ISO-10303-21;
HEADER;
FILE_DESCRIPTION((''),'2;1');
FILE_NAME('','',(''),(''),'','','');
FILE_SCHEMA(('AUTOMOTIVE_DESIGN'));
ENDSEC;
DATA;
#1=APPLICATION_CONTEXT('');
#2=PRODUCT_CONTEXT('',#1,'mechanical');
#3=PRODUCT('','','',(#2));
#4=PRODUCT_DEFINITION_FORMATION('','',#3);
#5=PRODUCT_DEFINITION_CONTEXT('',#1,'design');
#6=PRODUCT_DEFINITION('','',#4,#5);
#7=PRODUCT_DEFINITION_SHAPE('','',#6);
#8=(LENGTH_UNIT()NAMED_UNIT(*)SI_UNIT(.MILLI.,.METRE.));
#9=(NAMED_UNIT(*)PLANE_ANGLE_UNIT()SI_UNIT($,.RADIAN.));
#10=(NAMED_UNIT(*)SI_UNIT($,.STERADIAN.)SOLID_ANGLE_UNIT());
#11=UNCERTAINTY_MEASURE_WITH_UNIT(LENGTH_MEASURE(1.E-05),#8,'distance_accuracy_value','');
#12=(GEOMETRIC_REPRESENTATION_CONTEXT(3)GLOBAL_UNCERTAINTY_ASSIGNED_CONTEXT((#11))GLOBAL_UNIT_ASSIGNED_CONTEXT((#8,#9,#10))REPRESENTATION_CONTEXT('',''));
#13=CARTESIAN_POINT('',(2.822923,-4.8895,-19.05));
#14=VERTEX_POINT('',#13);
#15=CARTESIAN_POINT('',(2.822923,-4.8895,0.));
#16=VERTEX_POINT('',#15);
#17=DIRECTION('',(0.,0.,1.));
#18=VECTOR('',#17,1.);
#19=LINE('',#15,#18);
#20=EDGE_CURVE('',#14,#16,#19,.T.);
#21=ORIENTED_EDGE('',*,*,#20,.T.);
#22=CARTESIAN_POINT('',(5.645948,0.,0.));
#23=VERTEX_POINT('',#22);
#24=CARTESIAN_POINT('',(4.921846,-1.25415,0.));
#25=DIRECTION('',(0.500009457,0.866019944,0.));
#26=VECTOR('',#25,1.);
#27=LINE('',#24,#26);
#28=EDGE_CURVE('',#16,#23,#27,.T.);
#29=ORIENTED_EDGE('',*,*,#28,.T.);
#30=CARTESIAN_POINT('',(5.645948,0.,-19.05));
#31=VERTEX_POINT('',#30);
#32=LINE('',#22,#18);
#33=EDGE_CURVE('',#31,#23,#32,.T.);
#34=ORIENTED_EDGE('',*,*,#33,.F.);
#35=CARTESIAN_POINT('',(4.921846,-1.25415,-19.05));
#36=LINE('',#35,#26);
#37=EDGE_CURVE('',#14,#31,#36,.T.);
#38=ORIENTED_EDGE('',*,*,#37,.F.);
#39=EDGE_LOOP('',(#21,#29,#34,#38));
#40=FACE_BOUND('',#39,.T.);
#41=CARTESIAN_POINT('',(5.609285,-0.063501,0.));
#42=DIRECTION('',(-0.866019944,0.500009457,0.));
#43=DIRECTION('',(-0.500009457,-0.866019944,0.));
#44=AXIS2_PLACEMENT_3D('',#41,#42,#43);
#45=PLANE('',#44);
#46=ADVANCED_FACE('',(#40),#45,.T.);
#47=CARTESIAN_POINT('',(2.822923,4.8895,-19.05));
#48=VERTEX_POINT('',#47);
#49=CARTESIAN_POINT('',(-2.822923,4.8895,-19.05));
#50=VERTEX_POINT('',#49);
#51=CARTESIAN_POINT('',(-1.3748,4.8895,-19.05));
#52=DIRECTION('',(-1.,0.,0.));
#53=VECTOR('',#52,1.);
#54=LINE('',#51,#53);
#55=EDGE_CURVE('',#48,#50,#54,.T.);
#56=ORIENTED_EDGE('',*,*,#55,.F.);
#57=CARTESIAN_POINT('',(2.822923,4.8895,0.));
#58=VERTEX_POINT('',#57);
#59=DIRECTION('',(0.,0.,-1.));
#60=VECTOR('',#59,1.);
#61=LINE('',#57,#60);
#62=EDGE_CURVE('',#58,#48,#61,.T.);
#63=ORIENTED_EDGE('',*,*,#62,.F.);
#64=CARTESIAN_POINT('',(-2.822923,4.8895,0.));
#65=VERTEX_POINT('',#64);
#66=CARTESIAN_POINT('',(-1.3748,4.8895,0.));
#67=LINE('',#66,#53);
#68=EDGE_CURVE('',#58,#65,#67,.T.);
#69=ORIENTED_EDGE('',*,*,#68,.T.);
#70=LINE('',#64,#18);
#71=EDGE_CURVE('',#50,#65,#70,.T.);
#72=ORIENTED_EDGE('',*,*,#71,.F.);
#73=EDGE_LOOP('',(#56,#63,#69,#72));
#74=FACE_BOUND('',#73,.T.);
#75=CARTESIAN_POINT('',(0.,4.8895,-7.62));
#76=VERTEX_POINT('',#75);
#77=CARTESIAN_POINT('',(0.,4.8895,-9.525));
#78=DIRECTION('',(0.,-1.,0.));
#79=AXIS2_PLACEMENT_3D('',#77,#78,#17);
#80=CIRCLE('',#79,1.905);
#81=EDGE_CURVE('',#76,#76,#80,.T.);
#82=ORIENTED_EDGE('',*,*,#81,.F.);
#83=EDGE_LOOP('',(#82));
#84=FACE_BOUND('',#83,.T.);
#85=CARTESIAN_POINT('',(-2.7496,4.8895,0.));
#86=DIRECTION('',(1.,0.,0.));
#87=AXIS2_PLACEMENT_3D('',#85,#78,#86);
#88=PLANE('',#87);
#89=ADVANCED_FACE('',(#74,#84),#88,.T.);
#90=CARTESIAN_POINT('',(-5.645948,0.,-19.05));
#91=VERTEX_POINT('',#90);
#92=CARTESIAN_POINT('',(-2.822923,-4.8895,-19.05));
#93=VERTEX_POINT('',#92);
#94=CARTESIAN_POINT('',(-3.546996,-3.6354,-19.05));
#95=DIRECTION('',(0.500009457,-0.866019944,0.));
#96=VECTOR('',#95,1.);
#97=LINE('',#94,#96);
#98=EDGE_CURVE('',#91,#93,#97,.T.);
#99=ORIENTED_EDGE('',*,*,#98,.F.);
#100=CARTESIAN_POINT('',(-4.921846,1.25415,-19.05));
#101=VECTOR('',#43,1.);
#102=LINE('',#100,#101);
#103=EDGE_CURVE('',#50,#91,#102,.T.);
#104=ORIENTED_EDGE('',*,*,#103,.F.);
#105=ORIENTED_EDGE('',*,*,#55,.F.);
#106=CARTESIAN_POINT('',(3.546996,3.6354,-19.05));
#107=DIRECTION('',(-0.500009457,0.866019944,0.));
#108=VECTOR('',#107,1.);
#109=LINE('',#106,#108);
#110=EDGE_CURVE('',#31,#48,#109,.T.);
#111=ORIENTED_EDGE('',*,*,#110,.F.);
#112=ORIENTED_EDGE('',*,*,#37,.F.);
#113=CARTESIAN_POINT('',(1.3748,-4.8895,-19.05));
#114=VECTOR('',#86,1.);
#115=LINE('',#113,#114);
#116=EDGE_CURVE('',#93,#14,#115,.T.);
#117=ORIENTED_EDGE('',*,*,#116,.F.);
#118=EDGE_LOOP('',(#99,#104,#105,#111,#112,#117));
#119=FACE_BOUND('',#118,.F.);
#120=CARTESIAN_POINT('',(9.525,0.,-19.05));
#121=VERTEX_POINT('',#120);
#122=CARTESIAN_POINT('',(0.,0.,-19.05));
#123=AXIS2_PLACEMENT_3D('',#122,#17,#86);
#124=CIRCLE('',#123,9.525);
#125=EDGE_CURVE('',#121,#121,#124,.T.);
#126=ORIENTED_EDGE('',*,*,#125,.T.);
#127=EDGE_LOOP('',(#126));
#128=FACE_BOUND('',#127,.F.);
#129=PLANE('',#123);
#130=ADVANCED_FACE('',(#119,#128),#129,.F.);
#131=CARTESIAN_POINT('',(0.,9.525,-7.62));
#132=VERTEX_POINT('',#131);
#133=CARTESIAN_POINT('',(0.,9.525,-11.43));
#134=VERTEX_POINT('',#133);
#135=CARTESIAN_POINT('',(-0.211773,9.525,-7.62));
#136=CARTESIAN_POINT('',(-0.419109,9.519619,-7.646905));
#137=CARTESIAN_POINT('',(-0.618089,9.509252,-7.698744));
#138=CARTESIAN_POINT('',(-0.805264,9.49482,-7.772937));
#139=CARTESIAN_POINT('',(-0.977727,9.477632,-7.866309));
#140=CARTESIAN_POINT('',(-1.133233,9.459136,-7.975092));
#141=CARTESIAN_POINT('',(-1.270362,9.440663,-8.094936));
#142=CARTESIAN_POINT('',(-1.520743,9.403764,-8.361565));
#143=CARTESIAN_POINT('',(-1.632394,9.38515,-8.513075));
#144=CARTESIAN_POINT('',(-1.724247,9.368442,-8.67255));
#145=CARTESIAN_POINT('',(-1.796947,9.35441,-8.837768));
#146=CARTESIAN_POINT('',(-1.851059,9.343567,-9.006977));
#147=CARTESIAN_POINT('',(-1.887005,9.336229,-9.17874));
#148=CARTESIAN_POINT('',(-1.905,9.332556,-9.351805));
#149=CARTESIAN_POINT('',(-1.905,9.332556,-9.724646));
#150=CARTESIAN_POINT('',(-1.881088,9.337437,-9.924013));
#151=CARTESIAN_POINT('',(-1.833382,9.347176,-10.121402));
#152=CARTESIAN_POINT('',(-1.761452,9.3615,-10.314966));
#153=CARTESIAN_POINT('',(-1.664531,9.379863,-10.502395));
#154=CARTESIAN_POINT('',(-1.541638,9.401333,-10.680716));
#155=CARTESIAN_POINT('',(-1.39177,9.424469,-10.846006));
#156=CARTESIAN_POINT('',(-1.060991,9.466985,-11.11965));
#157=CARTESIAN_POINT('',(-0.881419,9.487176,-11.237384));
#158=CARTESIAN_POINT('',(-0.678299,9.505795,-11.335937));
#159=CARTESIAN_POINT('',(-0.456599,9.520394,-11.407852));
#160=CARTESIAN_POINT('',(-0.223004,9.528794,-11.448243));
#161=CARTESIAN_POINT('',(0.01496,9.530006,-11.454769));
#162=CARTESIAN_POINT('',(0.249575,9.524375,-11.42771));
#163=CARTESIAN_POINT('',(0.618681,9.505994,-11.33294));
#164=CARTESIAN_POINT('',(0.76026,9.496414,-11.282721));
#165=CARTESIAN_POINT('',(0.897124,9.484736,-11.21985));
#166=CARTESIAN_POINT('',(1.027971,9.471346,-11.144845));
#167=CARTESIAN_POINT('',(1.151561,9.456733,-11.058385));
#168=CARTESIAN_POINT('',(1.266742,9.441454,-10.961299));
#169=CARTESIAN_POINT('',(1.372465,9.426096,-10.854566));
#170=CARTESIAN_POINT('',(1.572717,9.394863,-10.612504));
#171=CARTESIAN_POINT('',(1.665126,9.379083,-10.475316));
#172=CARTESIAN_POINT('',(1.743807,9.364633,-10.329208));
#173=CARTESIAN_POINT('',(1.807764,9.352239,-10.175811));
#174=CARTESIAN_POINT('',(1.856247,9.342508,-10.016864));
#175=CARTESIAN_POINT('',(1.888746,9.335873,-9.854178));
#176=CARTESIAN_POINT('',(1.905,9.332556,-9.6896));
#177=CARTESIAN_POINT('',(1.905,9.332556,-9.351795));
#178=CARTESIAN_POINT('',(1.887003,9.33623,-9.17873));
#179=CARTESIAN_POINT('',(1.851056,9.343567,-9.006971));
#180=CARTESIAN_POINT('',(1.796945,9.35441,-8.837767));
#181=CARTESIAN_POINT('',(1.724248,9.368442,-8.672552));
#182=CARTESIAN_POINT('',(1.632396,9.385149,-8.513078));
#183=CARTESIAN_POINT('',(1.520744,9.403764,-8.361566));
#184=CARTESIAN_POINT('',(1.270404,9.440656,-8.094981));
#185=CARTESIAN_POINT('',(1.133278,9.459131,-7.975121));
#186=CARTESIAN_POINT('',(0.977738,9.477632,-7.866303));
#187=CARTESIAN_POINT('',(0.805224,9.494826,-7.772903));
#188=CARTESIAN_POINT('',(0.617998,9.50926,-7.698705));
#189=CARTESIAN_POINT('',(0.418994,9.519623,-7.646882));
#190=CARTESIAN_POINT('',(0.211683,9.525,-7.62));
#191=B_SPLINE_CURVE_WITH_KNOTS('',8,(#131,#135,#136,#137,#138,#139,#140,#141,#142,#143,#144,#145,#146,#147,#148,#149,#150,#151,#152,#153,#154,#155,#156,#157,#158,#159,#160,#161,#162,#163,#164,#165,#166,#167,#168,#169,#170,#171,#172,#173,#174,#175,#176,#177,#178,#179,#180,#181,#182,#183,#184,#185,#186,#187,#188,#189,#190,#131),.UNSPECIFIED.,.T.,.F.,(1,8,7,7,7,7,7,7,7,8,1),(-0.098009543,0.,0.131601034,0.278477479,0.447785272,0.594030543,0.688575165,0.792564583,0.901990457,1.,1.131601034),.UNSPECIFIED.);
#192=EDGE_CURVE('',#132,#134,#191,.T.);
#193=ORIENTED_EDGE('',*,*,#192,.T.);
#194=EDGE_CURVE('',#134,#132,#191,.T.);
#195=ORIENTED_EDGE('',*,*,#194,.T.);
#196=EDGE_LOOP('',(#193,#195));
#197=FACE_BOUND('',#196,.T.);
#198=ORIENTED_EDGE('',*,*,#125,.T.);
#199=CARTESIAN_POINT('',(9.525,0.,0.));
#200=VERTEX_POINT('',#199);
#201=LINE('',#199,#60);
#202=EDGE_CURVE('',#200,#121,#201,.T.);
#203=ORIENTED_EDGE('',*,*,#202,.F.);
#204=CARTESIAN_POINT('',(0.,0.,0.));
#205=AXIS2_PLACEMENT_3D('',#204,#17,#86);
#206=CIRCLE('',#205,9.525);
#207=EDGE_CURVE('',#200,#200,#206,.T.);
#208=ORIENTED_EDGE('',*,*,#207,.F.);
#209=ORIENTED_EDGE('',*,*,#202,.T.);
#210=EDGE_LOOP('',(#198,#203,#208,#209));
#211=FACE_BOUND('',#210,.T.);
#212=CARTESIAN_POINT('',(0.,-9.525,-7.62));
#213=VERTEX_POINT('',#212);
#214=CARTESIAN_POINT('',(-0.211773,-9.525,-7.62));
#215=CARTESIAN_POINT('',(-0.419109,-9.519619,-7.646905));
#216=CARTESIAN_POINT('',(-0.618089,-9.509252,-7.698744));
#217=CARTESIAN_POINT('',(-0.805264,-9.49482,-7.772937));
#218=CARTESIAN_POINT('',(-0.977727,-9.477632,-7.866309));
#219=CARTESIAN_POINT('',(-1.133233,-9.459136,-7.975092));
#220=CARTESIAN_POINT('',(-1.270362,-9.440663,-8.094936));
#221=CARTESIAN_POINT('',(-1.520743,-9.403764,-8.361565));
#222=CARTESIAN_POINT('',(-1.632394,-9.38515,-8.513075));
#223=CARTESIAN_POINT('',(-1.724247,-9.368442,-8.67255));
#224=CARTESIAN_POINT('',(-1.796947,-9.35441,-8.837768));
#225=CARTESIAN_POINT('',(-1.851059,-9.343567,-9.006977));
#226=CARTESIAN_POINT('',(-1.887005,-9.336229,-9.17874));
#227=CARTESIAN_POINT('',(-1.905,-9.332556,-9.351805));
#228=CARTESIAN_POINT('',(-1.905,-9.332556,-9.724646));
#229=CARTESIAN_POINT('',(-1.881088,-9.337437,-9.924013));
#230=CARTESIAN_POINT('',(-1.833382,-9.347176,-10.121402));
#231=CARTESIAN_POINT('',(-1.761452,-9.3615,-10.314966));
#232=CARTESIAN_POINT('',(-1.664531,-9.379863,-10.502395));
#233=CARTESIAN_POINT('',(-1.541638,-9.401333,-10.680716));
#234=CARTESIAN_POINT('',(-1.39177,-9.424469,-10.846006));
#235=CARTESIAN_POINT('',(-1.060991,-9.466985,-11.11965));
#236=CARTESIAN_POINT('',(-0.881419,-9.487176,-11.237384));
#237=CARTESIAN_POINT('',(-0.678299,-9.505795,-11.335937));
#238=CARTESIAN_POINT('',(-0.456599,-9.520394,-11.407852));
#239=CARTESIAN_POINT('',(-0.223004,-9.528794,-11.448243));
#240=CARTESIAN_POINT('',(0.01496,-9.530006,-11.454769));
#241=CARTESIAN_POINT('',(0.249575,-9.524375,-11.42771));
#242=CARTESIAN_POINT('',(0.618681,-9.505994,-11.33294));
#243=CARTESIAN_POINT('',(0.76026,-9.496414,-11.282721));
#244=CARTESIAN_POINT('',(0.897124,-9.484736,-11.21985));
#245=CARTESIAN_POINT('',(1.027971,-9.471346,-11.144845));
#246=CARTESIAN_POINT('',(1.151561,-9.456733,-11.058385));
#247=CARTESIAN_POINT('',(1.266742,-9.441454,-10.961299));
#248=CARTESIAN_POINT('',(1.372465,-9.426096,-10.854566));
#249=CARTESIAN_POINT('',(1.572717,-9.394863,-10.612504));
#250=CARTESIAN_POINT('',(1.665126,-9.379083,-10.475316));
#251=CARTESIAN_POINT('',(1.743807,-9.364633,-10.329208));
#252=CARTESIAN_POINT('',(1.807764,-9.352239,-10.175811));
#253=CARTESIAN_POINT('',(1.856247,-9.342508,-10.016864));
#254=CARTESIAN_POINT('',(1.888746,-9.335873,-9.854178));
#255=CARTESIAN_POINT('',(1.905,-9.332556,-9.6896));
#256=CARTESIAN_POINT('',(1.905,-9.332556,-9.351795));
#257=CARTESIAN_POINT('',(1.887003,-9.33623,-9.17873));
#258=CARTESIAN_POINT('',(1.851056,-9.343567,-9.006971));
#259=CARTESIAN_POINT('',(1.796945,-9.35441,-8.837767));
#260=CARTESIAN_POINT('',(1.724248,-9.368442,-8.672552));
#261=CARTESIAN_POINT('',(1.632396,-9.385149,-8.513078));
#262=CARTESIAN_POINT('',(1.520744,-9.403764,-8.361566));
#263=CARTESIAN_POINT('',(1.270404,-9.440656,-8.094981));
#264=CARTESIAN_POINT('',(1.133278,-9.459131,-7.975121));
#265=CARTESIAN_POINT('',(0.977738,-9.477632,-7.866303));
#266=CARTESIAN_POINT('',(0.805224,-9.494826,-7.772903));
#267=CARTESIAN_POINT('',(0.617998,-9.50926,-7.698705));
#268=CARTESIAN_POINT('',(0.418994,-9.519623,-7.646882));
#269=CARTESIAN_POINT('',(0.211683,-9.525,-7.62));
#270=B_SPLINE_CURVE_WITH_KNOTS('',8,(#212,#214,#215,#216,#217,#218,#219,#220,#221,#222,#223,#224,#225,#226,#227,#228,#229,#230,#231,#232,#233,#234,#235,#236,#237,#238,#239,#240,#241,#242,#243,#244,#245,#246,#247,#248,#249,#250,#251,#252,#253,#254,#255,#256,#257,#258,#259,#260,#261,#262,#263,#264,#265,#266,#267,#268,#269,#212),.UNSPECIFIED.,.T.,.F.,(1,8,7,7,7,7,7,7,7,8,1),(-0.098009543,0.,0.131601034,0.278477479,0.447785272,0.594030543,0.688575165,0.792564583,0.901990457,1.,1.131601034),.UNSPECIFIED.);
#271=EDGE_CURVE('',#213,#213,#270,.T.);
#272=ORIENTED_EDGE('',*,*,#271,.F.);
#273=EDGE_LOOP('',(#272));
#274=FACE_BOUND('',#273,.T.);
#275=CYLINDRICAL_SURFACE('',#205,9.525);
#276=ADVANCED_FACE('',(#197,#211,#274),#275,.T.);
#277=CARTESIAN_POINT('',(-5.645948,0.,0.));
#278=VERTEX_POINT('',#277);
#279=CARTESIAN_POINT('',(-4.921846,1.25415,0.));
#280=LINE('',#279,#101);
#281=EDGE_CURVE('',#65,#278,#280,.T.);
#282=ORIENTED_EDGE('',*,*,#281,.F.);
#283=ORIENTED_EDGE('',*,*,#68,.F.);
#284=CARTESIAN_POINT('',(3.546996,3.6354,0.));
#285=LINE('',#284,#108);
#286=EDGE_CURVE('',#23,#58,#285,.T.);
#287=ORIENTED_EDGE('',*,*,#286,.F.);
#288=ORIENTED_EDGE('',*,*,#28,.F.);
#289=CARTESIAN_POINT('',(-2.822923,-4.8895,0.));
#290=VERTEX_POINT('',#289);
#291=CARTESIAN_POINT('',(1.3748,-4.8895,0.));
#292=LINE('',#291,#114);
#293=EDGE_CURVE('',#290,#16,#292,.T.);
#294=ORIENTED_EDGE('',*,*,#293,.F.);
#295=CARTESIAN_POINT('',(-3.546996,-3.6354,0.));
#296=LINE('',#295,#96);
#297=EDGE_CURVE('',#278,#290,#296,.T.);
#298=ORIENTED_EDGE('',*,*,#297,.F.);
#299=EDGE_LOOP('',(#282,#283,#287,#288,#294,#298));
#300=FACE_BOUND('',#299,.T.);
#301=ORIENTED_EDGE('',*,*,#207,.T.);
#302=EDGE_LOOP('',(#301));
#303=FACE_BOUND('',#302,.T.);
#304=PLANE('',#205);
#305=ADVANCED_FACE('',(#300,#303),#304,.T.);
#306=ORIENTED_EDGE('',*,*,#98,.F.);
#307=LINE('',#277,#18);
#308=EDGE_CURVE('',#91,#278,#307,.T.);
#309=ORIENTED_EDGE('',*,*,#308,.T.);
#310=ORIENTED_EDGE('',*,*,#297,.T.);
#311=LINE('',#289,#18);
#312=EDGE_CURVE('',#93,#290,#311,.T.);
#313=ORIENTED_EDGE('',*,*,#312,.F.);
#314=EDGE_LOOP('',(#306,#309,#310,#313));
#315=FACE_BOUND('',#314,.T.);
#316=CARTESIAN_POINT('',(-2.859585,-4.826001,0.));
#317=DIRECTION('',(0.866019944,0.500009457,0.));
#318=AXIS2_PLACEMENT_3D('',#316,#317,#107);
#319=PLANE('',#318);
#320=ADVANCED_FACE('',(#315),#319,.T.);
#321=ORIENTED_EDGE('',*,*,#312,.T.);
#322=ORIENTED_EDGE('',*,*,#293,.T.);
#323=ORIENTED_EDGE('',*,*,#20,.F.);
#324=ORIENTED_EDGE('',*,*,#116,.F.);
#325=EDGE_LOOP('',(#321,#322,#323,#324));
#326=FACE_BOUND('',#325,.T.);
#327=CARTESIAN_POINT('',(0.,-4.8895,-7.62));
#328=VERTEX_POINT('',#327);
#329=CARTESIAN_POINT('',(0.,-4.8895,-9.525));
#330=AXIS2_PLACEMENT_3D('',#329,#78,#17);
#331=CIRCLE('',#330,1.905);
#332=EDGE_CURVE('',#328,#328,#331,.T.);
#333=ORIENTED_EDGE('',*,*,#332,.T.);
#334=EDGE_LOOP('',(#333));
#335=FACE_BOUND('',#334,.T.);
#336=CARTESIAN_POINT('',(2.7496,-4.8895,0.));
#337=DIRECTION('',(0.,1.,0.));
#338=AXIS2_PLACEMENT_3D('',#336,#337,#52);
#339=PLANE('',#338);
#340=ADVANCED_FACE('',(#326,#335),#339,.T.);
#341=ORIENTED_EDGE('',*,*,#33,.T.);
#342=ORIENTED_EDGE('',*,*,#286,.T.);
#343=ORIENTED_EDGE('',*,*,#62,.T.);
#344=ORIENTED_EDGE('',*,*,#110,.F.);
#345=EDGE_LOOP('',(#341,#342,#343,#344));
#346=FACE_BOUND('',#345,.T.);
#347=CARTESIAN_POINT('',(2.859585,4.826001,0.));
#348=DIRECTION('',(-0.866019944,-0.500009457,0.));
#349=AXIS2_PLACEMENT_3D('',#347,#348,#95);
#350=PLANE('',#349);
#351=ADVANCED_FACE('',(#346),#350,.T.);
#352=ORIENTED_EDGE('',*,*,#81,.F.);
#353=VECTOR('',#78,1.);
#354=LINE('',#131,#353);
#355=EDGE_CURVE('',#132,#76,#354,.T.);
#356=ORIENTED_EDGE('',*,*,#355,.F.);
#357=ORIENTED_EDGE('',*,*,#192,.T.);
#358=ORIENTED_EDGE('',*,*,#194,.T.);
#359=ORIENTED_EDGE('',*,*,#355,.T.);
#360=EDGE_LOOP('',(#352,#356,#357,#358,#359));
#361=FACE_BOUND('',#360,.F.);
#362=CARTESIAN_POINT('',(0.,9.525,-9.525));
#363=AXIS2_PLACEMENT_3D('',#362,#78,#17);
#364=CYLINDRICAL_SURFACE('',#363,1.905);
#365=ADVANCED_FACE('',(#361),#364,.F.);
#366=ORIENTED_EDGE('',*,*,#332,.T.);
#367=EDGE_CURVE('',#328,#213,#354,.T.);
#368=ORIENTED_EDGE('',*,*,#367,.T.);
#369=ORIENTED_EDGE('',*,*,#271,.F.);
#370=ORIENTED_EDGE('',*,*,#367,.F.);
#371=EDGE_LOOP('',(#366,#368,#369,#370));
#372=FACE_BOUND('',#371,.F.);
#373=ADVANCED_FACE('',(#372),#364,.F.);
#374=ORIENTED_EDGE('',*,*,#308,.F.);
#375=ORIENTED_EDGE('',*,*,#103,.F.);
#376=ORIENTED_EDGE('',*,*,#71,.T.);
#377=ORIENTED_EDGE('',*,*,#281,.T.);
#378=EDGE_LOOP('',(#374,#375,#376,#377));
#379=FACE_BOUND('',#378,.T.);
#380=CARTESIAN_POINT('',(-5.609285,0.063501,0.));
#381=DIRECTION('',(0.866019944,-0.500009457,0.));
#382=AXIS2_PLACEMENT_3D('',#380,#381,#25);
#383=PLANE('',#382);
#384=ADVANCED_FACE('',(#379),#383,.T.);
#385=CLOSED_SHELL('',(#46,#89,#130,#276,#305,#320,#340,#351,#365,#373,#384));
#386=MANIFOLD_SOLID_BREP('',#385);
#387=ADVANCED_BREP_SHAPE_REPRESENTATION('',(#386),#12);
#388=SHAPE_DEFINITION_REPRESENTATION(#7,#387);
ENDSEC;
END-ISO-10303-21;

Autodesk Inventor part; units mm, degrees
ref_plane "YZ Plane" through (0, 0, 0) normal (1, 0, 0) x (0, 1, 0)
ref_plane "XY Plane" through (0, 0, 0) normal (0, 0, 1) x (1, 0, 0)
sketch "Sketch1" plane through (0, 0, 0) normal (0, 0, 1) x (1, 0, 0)
  line L0 (2.7496, 4.7625) -> (5.4993, 0)
  line L1 (5.4993, 0) -> (2.7496, -4.7625)
  line L2 (2.7496, -4.7625) -> (-2.7496, -4.7625)
  line L3 (-2.7496, -4.7625) -> (-5.4993, 0)
  line L4 (-5.4993, 0) -> (-2.7496, 4.7625)
  line L5 (-2.7496, 4.7625) -> (2.7496, 4.7625)
  circle A0 centre (0, 0) radius 9.525
  circle A1 centre (0, 0) radius 5.4993 construction
  dimension "d0" = 9.525
  dimension "d2" = 19.05
  dimension "d3" = 4.0257
extrude "Extrusion1" add sketch "Sketch1" against normal blind 19.05
thicken "Thicken Hex" operation add thickness 0.127 both sides no extend neighbours yes toward (-0.8660254, 0.5, 0) faces at (-4.5827, 1.5875, -6.35) (-3.6662, -3.175, -6.35) (0.9165, -4.7625, -6.35) (-0.9165, 4.7625, -6.35) (3.6662, 3.175, -6.35) (4.5827, -1.5875, -6.35)
ref_plane "Work Plane1" through (0, 9.525, 0) normal (0, 1, 0) x (-1, 0, 0)
sketch "Sketch3" plane through (0, 9.525, 0) normal (0, 1, 0) x (-1, 0, 0)
  line L0 (0, 0) -> (0, -19.05) construction
  line L1 (-9.525, -19.05) -> (9.525, -19.05) construction
  point P0 (0, -9.525)
hole "Hole1" at (0, 9.525, -9.525) direction (0, -1, 0) diameter 3.81 end through all clearance for "Flat Head Machine Screw (82)" size "#6" standard "Ansi Unified Screw Threads"
equation "\"d0\" = hexSize"
equation "\"d2\" = exteriorDiameter"
equation "\"d4\" = length"
equation "\"d6\" = printSpacing"
equation "\"d7\" = printSpacing"
equation "\"hexSize\" = 9.525"
equation "\"exteriorDiameter\" = 19.05"
equation "\"length\" = 19.05"
equation "\"printSpacing\" = 0.127"
properties part number "3_8x3_4x3_4-hexBearing" material "PC/ABS Plastic"
